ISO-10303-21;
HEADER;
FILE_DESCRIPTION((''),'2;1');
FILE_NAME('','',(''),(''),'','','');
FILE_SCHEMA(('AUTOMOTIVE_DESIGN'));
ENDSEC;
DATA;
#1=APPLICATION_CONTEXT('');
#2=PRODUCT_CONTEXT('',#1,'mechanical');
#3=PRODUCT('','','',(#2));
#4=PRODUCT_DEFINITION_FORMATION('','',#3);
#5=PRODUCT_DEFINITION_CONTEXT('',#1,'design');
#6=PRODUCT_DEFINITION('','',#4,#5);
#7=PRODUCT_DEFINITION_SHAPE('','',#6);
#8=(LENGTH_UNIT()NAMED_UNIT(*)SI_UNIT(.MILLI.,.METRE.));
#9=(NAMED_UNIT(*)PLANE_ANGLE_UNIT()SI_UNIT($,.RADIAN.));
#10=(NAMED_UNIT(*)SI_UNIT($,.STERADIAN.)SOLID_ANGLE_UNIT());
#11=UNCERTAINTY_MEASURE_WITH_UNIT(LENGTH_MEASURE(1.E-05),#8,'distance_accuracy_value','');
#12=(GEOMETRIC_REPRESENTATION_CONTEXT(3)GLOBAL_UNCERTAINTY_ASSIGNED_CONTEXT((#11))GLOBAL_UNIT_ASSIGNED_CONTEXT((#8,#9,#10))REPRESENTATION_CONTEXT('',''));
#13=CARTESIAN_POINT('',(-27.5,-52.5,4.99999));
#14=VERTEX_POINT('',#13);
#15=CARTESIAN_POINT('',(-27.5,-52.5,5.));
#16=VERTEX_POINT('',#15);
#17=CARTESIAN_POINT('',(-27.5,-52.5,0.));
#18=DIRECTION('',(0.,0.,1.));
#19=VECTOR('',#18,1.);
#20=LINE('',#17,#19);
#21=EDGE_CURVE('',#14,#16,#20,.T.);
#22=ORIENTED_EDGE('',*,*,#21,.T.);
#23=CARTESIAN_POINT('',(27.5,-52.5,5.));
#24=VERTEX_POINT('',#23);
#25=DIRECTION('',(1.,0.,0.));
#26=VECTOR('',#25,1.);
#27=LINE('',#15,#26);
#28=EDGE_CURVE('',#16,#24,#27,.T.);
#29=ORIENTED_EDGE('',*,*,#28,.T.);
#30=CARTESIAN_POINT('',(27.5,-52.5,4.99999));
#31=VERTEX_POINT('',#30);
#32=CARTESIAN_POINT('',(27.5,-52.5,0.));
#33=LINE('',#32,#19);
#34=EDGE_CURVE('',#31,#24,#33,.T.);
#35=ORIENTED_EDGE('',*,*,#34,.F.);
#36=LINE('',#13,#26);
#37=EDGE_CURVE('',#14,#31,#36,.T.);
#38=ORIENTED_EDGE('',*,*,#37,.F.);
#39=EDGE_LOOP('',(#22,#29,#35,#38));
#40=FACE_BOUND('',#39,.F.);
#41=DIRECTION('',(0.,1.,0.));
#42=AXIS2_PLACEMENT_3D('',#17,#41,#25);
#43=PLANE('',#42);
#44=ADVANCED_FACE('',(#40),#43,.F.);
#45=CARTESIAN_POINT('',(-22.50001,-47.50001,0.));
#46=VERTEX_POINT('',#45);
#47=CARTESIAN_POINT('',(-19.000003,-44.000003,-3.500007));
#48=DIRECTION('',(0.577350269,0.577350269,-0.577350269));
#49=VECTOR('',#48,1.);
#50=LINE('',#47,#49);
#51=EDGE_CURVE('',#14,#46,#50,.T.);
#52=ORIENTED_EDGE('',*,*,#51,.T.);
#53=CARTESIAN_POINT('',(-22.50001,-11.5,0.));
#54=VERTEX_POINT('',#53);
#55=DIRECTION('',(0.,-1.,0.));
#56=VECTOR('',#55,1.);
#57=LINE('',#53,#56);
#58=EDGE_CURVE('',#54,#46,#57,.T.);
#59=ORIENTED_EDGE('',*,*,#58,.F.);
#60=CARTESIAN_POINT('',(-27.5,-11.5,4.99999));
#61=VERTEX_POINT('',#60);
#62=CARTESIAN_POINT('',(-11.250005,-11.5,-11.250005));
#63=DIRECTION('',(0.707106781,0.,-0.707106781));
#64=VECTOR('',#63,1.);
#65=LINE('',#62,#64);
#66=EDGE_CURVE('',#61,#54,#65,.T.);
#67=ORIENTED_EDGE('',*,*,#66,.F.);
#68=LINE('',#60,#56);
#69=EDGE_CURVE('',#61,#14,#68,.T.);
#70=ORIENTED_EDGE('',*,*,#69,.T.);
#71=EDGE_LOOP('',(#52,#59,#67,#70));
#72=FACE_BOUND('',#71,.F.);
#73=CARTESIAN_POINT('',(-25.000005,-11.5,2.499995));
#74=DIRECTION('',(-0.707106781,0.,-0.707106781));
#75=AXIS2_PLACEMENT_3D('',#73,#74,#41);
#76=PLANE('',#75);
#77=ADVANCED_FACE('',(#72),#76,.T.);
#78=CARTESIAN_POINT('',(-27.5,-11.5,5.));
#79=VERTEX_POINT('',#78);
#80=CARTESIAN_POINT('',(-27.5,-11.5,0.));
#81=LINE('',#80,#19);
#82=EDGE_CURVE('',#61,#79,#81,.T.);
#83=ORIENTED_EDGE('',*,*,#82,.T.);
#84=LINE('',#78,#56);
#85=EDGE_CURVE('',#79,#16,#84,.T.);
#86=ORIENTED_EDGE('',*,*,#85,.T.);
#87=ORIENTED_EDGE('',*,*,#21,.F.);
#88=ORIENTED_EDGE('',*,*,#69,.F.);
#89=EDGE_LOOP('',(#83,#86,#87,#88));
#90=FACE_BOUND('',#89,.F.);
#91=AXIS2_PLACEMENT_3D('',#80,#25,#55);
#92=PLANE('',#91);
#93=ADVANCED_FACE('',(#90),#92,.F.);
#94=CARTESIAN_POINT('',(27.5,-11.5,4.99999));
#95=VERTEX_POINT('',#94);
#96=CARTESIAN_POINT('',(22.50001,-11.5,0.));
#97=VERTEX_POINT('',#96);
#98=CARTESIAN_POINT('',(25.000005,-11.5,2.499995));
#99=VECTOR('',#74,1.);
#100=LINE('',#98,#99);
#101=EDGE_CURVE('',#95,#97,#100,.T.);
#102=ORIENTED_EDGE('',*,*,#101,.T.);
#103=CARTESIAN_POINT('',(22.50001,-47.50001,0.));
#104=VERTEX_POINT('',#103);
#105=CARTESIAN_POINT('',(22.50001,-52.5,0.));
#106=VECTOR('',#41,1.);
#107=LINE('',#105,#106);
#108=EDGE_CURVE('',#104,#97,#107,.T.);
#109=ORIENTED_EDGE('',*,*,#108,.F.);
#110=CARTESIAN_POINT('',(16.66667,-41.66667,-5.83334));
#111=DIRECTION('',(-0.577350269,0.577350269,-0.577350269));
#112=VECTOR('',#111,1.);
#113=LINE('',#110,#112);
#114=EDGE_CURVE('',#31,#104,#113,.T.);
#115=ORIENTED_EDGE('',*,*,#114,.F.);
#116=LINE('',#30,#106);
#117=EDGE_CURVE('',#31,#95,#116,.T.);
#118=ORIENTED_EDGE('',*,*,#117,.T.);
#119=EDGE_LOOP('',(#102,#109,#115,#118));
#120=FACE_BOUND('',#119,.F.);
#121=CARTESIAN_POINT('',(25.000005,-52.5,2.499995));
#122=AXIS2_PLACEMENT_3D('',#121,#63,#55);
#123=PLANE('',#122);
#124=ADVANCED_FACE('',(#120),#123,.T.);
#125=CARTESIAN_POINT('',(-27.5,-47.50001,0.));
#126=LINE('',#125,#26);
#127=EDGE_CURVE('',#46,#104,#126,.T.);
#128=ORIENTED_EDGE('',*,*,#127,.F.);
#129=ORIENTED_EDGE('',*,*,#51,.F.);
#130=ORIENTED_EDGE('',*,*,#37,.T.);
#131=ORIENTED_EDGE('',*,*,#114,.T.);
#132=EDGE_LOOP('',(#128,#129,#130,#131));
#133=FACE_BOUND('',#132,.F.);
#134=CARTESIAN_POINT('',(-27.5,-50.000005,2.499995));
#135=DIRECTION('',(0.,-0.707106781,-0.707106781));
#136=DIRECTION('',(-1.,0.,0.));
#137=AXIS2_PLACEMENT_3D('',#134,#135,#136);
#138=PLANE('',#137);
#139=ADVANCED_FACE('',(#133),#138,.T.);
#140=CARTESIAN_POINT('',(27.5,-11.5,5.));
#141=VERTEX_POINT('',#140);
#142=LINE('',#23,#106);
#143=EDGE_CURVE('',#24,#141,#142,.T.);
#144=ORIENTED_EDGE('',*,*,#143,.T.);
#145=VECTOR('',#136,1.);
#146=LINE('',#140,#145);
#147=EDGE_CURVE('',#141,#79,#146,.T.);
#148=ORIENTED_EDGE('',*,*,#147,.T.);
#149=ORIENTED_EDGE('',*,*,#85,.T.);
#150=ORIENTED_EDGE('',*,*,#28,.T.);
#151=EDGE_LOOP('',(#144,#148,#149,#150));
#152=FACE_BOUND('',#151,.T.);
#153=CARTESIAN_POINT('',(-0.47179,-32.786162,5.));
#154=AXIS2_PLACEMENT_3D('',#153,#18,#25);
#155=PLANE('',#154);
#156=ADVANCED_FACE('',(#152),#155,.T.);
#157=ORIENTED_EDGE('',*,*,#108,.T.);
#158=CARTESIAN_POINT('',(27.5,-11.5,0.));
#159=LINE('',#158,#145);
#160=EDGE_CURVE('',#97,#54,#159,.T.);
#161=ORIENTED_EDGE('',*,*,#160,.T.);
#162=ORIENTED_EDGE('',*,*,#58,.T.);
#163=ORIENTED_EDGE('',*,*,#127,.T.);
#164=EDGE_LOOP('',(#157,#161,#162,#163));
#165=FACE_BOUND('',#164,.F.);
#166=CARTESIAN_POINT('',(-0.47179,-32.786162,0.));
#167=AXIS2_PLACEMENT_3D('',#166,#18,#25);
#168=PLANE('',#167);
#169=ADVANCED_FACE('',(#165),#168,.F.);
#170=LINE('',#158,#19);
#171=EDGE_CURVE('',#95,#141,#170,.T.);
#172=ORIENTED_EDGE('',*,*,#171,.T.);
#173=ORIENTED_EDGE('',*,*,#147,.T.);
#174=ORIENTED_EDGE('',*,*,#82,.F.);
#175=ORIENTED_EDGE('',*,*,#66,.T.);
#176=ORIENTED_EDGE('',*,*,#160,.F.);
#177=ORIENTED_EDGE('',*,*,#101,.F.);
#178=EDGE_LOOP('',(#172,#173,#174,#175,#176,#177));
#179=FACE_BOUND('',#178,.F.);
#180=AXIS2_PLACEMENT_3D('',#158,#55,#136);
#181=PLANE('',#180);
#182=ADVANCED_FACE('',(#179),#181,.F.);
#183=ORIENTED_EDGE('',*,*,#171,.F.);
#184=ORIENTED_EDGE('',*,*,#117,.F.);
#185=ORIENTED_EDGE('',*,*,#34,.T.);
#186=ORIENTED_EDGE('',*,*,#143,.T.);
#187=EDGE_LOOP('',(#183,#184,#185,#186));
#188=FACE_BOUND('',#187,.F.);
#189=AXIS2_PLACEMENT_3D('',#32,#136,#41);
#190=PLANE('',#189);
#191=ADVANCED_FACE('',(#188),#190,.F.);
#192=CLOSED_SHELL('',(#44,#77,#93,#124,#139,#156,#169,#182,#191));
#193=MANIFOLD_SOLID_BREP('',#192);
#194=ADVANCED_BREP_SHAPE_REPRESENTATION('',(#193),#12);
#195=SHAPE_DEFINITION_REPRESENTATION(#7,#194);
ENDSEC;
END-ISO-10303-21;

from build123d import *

# Parameters (mm, degrees)
F1_DEPTH = 5
F2_SIZE  = 4.99999


# Not quite as in the source:
# - a fillet or chamfer is up to 0.001 mm smaller than in the source, because OpenCascade refuses the exact size


with BuildPart() as f1:
    # F0 (on Top) → F1 (new body)
    with BuildSketch(Plane.XY):
        Polygon((-27.5, -52.5), (27.5, -52.5), (27.5, -14.74), (-27.5, -11.5), align=None)
        Polygon((-27.5, -11.5), (27.5, -14.74), (27.5, -11.5), align=None)
    extrude(amount=F1_DEPTH)

    # F2 (size 5 in the source; OpenCascade refuses exactly that, so slightly less here)
    f2_edges = [f1.edges().sort_by_distance(p)[0] for p in [
        (-27.5, -32, 0),
        (0, -52.5, 0),
        (27.5, -32, 0),
    ]]
    chamfer(f2_edges, length=F2_SIZE)


solid = f1.part
